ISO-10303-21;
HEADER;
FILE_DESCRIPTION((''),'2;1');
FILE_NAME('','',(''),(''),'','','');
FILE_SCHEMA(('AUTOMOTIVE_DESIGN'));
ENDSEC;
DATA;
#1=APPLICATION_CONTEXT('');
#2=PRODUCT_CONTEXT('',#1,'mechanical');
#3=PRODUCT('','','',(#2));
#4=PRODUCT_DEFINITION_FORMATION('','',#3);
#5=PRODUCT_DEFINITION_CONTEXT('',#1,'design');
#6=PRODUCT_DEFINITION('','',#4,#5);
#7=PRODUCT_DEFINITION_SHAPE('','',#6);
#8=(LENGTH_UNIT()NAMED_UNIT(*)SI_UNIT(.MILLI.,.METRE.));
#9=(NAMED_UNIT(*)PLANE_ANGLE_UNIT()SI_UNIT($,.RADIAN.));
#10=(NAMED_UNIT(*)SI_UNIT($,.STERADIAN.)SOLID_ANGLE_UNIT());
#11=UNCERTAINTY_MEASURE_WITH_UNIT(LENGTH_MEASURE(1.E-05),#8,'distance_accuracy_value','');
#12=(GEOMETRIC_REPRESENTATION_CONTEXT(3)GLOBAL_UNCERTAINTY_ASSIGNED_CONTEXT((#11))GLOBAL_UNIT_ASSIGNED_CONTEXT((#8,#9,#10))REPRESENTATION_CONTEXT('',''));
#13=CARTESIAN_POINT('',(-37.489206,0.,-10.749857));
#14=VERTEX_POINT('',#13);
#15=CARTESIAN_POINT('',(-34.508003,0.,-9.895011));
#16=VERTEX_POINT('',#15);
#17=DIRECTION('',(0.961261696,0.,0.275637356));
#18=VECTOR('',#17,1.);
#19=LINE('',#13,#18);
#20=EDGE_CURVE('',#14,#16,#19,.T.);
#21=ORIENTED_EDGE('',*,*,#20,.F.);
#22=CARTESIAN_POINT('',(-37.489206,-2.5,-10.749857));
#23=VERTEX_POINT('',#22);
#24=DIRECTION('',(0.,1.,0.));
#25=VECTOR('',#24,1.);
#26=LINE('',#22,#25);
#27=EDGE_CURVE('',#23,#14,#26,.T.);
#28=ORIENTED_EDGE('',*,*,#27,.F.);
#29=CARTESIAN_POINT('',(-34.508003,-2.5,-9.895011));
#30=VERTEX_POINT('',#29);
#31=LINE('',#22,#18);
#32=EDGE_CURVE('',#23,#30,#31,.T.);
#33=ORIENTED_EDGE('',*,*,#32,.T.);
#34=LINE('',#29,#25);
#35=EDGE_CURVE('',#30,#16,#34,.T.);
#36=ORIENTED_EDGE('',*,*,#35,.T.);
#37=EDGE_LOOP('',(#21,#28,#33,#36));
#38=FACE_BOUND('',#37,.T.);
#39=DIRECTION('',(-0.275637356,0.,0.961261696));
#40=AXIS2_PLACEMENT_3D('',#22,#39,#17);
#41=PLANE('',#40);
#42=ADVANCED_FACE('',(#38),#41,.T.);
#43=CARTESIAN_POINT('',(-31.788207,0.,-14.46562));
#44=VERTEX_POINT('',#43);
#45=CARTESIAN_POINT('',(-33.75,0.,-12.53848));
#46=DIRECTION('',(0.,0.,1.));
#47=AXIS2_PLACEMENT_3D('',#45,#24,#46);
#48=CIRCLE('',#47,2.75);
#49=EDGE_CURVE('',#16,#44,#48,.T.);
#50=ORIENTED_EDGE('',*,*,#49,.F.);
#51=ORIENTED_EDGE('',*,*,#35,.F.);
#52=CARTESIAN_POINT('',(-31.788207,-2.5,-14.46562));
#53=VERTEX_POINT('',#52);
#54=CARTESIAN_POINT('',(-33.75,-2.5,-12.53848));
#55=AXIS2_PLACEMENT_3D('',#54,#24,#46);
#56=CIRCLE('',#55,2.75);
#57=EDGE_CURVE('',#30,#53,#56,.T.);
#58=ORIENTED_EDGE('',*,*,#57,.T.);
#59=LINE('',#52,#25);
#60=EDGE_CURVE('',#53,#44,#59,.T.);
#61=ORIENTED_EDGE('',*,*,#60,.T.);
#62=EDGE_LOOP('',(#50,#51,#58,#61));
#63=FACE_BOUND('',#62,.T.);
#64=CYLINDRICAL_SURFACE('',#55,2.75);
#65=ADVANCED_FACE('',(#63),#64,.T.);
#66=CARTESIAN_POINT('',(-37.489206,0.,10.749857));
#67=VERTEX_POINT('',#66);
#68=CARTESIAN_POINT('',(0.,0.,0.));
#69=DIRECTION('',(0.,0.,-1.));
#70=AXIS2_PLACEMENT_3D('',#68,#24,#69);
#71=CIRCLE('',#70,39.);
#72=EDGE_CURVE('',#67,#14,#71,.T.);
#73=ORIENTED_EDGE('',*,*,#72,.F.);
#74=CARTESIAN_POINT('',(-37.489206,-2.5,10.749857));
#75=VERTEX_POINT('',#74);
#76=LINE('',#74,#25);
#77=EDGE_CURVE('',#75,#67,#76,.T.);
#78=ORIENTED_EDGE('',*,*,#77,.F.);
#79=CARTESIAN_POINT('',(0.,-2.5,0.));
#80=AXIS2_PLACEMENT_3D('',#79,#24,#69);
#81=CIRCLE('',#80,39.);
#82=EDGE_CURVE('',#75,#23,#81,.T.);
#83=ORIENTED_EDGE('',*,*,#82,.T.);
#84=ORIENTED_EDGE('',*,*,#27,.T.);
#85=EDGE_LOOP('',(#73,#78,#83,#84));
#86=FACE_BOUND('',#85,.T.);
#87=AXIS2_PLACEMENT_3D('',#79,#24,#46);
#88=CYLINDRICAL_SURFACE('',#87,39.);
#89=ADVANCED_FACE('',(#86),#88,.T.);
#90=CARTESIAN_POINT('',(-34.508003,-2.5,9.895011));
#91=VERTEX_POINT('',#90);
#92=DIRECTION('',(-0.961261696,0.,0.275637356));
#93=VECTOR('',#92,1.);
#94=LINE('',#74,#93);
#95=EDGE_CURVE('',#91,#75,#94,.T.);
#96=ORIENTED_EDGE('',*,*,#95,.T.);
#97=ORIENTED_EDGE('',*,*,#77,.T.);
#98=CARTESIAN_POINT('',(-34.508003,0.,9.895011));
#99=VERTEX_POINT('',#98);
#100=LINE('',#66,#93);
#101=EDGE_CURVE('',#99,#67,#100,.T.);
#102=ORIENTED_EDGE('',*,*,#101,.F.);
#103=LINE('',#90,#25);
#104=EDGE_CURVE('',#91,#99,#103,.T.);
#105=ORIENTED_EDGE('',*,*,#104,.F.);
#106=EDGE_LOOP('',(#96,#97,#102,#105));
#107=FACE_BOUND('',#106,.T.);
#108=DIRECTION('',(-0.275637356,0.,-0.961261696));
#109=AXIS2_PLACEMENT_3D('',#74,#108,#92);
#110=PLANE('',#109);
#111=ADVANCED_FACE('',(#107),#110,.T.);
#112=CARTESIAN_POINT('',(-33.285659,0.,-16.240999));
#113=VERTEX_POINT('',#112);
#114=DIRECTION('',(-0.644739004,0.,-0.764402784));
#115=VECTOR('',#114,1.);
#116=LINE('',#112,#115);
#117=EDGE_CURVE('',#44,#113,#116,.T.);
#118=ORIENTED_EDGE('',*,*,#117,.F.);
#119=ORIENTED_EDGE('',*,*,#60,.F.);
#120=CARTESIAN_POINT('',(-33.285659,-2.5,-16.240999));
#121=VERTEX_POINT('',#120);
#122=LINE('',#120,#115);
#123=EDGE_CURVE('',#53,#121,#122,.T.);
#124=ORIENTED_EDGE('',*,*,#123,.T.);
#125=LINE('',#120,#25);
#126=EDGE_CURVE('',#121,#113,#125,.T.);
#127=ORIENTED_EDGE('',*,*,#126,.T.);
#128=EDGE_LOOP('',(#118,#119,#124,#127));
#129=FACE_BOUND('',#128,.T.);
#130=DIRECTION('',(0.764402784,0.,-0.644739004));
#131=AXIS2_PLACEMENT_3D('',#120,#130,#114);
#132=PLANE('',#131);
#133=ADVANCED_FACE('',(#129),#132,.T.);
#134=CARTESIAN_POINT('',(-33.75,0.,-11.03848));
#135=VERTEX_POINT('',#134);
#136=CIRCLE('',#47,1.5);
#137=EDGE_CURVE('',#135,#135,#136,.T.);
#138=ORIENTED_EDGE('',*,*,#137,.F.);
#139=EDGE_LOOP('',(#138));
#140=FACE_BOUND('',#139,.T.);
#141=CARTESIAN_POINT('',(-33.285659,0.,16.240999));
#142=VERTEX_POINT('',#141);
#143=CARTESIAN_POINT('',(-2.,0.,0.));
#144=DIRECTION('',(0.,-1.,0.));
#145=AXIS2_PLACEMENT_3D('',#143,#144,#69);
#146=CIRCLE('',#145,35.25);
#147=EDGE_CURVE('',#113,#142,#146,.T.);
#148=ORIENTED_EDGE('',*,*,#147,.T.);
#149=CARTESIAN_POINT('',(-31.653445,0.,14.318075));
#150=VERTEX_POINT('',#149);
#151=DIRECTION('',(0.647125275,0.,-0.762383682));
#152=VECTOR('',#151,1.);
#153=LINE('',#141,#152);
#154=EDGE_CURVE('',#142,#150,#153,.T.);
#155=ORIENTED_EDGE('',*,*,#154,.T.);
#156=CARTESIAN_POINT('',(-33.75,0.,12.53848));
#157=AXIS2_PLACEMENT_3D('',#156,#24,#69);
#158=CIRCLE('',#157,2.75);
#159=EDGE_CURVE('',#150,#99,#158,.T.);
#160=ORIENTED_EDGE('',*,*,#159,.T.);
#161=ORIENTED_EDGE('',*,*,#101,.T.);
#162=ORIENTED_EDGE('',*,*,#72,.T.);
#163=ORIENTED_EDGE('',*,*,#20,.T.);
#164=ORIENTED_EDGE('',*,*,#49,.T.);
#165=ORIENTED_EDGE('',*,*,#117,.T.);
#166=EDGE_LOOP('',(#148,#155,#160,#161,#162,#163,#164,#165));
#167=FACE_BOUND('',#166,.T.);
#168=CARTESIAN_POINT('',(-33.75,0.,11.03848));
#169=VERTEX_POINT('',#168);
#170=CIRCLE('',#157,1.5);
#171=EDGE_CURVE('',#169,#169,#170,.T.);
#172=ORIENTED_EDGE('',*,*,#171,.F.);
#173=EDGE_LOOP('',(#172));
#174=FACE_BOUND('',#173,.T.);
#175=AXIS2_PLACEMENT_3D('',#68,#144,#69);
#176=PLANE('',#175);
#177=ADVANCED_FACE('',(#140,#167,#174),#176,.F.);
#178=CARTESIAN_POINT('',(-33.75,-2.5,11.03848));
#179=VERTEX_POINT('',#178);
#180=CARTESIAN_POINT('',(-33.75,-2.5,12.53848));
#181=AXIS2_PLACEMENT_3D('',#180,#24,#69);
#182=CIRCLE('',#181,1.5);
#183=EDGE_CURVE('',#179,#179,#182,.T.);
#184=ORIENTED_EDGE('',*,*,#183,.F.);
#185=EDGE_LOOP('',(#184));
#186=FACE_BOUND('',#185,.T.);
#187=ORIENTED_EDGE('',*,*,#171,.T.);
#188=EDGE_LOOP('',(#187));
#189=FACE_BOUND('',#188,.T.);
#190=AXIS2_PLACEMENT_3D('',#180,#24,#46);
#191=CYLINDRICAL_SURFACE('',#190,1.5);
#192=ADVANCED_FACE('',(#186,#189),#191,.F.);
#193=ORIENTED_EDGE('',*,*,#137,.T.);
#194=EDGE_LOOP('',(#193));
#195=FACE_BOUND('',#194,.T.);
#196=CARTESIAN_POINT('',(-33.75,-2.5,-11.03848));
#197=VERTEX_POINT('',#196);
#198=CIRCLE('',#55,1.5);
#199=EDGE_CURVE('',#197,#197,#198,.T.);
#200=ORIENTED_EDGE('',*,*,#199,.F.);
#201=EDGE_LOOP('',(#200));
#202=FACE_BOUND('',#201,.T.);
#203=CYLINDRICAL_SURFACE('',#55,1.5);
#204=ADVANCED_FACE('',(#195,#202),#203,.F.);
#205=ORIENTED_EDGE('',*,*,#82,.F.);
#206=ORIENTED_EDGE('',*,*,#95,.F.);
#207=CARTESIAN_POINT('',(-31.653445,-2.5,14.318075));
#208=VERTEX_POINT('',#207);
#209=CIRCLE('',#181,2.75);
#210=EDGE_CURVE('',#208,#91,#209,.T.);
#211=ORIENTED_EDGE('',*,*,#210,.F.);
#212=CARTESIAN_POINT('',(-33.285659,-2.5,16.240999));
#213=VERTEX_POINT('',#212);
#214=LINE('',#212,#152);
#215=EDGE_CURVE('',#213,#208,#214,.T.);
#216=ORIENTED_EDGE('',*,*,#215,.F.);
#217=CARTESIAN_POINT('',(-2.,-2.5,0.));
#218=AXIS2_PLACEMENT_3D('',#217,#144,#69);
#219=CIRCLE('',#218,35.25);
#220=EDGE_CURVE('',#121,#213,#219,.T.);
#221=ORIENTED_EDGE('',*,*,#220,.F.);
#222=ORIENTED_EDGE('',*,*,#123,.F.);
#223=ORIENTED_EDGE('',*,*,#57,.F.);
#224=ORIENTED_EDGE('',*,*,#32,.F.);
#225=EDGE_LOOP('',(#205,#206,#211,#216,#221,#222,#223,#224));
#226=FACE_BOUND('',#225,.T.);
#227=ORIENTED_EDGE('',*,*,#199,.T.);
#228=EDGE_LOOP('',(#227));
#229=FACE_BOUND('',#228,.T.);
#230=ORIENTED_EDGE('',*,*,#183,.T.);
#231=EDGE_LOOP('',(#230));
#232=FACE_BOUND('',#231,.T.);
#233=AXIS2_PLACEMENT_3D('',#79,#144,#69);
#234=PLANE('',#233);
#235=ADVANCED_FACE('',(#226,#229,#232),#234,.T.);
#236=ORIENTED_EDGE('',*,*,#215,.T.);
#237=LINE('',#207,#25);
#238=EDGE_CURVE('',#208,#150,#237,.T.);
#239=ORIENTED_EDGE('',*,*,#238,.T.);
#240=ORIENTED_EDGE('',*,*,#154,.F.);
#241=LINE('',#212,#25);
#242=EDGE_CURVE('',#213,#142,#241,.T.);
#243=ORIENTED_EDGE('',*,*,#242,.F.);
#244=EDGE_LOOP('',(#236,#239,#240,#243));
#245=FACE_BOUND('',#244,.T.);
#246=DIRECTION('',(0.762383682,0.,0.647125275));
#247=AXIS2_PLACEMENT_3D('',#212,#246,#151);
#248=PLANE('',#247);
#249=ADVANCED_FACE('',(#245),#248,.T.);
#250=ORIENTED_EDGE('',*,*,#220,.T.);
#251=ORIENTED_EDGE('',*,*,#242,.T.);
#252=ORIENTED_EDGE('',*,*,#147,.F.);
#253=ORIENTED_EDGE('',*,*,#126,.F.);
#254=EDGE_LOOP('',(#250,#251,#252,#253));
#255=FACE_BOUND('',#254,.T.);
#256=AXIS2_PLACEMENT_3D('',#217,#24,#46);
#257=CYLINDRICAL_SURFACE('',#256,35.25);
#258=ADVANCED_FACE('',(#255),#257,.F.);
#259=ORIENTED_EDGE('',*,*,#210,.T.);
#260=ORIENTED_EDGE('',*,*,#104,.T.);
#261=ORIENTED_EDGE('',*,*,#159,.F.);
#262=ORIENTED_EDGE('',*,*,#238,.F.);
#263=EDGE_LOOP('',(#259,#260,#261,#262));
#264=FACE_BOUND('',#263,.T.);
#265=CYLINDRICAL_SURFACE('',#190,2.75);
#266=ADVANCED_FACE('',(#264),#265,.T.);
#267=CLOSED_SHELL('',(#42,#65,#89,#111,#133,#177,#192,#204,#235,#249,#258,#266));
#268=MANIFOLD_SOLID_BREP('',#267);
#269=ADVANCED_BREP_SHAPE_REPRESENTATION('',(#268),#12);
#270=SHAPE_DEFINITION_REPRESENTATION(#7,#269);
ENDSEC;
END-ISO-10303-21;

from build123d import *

# Parameters (mm, degrees)
SKETCH2_R          = 1.5
BASE_FLANGE1_DEPTH = 2.5


# Sheet-metal steps are written as plain solids
with BuildPart() as part:
    # Sketch2 → Base-Flange1 (new body)
    with BuildSketch(Plane(origin=(0, 0, 0), x_dir=(1, 0, 0), z_dir=(0, 1, 0))):
        with BuildLine():
            Line((-37.489206142, 10.749856877), (-34.508002728, 9.895010554))
            ThreePointArc((-34.508002728, 9.895010554), (-31.386761745, 11.132206792), (-31.788206612, 14.465619731))
            Line((-31.788206612, 14.465619731), (-33.28565867, 16.240999403))
            ThreePointArc((-33.28565867, 16.240999403), (33.25, 0), (-33.28565867, -16.240999403))
            Line((-33.28565867, -16.240999403), (-31.653444876, -14.318074725))
            ThreePointArc((-31.653444876, -14.318074725), (-31.439414621, -11.047274261), (-34.508002728, -9.895010554))
            Line((-34.508002728, -9.895010554), (-37.489206142, -10.749856877))
            ThreePointArc((-37.489206142, -10.749856877), (39, 0), (-37.489206142, 10.749856877))
        make_face()
        with Locations(Location((-33.75, 12.538480218, 0), (0, 0, 270))):
            Circle(SKETCH2_R, mode=Mode.SUBTRACT)
        with Locations(Location((-33.75, -12.538480218, 0), (0, 0, 90))):
            Circle(SKETCH2_R, mode=Mode.SUBTRACT)
    extrude(amount=-BASE_FLANGE1_DEPTH)


solid = part.part
